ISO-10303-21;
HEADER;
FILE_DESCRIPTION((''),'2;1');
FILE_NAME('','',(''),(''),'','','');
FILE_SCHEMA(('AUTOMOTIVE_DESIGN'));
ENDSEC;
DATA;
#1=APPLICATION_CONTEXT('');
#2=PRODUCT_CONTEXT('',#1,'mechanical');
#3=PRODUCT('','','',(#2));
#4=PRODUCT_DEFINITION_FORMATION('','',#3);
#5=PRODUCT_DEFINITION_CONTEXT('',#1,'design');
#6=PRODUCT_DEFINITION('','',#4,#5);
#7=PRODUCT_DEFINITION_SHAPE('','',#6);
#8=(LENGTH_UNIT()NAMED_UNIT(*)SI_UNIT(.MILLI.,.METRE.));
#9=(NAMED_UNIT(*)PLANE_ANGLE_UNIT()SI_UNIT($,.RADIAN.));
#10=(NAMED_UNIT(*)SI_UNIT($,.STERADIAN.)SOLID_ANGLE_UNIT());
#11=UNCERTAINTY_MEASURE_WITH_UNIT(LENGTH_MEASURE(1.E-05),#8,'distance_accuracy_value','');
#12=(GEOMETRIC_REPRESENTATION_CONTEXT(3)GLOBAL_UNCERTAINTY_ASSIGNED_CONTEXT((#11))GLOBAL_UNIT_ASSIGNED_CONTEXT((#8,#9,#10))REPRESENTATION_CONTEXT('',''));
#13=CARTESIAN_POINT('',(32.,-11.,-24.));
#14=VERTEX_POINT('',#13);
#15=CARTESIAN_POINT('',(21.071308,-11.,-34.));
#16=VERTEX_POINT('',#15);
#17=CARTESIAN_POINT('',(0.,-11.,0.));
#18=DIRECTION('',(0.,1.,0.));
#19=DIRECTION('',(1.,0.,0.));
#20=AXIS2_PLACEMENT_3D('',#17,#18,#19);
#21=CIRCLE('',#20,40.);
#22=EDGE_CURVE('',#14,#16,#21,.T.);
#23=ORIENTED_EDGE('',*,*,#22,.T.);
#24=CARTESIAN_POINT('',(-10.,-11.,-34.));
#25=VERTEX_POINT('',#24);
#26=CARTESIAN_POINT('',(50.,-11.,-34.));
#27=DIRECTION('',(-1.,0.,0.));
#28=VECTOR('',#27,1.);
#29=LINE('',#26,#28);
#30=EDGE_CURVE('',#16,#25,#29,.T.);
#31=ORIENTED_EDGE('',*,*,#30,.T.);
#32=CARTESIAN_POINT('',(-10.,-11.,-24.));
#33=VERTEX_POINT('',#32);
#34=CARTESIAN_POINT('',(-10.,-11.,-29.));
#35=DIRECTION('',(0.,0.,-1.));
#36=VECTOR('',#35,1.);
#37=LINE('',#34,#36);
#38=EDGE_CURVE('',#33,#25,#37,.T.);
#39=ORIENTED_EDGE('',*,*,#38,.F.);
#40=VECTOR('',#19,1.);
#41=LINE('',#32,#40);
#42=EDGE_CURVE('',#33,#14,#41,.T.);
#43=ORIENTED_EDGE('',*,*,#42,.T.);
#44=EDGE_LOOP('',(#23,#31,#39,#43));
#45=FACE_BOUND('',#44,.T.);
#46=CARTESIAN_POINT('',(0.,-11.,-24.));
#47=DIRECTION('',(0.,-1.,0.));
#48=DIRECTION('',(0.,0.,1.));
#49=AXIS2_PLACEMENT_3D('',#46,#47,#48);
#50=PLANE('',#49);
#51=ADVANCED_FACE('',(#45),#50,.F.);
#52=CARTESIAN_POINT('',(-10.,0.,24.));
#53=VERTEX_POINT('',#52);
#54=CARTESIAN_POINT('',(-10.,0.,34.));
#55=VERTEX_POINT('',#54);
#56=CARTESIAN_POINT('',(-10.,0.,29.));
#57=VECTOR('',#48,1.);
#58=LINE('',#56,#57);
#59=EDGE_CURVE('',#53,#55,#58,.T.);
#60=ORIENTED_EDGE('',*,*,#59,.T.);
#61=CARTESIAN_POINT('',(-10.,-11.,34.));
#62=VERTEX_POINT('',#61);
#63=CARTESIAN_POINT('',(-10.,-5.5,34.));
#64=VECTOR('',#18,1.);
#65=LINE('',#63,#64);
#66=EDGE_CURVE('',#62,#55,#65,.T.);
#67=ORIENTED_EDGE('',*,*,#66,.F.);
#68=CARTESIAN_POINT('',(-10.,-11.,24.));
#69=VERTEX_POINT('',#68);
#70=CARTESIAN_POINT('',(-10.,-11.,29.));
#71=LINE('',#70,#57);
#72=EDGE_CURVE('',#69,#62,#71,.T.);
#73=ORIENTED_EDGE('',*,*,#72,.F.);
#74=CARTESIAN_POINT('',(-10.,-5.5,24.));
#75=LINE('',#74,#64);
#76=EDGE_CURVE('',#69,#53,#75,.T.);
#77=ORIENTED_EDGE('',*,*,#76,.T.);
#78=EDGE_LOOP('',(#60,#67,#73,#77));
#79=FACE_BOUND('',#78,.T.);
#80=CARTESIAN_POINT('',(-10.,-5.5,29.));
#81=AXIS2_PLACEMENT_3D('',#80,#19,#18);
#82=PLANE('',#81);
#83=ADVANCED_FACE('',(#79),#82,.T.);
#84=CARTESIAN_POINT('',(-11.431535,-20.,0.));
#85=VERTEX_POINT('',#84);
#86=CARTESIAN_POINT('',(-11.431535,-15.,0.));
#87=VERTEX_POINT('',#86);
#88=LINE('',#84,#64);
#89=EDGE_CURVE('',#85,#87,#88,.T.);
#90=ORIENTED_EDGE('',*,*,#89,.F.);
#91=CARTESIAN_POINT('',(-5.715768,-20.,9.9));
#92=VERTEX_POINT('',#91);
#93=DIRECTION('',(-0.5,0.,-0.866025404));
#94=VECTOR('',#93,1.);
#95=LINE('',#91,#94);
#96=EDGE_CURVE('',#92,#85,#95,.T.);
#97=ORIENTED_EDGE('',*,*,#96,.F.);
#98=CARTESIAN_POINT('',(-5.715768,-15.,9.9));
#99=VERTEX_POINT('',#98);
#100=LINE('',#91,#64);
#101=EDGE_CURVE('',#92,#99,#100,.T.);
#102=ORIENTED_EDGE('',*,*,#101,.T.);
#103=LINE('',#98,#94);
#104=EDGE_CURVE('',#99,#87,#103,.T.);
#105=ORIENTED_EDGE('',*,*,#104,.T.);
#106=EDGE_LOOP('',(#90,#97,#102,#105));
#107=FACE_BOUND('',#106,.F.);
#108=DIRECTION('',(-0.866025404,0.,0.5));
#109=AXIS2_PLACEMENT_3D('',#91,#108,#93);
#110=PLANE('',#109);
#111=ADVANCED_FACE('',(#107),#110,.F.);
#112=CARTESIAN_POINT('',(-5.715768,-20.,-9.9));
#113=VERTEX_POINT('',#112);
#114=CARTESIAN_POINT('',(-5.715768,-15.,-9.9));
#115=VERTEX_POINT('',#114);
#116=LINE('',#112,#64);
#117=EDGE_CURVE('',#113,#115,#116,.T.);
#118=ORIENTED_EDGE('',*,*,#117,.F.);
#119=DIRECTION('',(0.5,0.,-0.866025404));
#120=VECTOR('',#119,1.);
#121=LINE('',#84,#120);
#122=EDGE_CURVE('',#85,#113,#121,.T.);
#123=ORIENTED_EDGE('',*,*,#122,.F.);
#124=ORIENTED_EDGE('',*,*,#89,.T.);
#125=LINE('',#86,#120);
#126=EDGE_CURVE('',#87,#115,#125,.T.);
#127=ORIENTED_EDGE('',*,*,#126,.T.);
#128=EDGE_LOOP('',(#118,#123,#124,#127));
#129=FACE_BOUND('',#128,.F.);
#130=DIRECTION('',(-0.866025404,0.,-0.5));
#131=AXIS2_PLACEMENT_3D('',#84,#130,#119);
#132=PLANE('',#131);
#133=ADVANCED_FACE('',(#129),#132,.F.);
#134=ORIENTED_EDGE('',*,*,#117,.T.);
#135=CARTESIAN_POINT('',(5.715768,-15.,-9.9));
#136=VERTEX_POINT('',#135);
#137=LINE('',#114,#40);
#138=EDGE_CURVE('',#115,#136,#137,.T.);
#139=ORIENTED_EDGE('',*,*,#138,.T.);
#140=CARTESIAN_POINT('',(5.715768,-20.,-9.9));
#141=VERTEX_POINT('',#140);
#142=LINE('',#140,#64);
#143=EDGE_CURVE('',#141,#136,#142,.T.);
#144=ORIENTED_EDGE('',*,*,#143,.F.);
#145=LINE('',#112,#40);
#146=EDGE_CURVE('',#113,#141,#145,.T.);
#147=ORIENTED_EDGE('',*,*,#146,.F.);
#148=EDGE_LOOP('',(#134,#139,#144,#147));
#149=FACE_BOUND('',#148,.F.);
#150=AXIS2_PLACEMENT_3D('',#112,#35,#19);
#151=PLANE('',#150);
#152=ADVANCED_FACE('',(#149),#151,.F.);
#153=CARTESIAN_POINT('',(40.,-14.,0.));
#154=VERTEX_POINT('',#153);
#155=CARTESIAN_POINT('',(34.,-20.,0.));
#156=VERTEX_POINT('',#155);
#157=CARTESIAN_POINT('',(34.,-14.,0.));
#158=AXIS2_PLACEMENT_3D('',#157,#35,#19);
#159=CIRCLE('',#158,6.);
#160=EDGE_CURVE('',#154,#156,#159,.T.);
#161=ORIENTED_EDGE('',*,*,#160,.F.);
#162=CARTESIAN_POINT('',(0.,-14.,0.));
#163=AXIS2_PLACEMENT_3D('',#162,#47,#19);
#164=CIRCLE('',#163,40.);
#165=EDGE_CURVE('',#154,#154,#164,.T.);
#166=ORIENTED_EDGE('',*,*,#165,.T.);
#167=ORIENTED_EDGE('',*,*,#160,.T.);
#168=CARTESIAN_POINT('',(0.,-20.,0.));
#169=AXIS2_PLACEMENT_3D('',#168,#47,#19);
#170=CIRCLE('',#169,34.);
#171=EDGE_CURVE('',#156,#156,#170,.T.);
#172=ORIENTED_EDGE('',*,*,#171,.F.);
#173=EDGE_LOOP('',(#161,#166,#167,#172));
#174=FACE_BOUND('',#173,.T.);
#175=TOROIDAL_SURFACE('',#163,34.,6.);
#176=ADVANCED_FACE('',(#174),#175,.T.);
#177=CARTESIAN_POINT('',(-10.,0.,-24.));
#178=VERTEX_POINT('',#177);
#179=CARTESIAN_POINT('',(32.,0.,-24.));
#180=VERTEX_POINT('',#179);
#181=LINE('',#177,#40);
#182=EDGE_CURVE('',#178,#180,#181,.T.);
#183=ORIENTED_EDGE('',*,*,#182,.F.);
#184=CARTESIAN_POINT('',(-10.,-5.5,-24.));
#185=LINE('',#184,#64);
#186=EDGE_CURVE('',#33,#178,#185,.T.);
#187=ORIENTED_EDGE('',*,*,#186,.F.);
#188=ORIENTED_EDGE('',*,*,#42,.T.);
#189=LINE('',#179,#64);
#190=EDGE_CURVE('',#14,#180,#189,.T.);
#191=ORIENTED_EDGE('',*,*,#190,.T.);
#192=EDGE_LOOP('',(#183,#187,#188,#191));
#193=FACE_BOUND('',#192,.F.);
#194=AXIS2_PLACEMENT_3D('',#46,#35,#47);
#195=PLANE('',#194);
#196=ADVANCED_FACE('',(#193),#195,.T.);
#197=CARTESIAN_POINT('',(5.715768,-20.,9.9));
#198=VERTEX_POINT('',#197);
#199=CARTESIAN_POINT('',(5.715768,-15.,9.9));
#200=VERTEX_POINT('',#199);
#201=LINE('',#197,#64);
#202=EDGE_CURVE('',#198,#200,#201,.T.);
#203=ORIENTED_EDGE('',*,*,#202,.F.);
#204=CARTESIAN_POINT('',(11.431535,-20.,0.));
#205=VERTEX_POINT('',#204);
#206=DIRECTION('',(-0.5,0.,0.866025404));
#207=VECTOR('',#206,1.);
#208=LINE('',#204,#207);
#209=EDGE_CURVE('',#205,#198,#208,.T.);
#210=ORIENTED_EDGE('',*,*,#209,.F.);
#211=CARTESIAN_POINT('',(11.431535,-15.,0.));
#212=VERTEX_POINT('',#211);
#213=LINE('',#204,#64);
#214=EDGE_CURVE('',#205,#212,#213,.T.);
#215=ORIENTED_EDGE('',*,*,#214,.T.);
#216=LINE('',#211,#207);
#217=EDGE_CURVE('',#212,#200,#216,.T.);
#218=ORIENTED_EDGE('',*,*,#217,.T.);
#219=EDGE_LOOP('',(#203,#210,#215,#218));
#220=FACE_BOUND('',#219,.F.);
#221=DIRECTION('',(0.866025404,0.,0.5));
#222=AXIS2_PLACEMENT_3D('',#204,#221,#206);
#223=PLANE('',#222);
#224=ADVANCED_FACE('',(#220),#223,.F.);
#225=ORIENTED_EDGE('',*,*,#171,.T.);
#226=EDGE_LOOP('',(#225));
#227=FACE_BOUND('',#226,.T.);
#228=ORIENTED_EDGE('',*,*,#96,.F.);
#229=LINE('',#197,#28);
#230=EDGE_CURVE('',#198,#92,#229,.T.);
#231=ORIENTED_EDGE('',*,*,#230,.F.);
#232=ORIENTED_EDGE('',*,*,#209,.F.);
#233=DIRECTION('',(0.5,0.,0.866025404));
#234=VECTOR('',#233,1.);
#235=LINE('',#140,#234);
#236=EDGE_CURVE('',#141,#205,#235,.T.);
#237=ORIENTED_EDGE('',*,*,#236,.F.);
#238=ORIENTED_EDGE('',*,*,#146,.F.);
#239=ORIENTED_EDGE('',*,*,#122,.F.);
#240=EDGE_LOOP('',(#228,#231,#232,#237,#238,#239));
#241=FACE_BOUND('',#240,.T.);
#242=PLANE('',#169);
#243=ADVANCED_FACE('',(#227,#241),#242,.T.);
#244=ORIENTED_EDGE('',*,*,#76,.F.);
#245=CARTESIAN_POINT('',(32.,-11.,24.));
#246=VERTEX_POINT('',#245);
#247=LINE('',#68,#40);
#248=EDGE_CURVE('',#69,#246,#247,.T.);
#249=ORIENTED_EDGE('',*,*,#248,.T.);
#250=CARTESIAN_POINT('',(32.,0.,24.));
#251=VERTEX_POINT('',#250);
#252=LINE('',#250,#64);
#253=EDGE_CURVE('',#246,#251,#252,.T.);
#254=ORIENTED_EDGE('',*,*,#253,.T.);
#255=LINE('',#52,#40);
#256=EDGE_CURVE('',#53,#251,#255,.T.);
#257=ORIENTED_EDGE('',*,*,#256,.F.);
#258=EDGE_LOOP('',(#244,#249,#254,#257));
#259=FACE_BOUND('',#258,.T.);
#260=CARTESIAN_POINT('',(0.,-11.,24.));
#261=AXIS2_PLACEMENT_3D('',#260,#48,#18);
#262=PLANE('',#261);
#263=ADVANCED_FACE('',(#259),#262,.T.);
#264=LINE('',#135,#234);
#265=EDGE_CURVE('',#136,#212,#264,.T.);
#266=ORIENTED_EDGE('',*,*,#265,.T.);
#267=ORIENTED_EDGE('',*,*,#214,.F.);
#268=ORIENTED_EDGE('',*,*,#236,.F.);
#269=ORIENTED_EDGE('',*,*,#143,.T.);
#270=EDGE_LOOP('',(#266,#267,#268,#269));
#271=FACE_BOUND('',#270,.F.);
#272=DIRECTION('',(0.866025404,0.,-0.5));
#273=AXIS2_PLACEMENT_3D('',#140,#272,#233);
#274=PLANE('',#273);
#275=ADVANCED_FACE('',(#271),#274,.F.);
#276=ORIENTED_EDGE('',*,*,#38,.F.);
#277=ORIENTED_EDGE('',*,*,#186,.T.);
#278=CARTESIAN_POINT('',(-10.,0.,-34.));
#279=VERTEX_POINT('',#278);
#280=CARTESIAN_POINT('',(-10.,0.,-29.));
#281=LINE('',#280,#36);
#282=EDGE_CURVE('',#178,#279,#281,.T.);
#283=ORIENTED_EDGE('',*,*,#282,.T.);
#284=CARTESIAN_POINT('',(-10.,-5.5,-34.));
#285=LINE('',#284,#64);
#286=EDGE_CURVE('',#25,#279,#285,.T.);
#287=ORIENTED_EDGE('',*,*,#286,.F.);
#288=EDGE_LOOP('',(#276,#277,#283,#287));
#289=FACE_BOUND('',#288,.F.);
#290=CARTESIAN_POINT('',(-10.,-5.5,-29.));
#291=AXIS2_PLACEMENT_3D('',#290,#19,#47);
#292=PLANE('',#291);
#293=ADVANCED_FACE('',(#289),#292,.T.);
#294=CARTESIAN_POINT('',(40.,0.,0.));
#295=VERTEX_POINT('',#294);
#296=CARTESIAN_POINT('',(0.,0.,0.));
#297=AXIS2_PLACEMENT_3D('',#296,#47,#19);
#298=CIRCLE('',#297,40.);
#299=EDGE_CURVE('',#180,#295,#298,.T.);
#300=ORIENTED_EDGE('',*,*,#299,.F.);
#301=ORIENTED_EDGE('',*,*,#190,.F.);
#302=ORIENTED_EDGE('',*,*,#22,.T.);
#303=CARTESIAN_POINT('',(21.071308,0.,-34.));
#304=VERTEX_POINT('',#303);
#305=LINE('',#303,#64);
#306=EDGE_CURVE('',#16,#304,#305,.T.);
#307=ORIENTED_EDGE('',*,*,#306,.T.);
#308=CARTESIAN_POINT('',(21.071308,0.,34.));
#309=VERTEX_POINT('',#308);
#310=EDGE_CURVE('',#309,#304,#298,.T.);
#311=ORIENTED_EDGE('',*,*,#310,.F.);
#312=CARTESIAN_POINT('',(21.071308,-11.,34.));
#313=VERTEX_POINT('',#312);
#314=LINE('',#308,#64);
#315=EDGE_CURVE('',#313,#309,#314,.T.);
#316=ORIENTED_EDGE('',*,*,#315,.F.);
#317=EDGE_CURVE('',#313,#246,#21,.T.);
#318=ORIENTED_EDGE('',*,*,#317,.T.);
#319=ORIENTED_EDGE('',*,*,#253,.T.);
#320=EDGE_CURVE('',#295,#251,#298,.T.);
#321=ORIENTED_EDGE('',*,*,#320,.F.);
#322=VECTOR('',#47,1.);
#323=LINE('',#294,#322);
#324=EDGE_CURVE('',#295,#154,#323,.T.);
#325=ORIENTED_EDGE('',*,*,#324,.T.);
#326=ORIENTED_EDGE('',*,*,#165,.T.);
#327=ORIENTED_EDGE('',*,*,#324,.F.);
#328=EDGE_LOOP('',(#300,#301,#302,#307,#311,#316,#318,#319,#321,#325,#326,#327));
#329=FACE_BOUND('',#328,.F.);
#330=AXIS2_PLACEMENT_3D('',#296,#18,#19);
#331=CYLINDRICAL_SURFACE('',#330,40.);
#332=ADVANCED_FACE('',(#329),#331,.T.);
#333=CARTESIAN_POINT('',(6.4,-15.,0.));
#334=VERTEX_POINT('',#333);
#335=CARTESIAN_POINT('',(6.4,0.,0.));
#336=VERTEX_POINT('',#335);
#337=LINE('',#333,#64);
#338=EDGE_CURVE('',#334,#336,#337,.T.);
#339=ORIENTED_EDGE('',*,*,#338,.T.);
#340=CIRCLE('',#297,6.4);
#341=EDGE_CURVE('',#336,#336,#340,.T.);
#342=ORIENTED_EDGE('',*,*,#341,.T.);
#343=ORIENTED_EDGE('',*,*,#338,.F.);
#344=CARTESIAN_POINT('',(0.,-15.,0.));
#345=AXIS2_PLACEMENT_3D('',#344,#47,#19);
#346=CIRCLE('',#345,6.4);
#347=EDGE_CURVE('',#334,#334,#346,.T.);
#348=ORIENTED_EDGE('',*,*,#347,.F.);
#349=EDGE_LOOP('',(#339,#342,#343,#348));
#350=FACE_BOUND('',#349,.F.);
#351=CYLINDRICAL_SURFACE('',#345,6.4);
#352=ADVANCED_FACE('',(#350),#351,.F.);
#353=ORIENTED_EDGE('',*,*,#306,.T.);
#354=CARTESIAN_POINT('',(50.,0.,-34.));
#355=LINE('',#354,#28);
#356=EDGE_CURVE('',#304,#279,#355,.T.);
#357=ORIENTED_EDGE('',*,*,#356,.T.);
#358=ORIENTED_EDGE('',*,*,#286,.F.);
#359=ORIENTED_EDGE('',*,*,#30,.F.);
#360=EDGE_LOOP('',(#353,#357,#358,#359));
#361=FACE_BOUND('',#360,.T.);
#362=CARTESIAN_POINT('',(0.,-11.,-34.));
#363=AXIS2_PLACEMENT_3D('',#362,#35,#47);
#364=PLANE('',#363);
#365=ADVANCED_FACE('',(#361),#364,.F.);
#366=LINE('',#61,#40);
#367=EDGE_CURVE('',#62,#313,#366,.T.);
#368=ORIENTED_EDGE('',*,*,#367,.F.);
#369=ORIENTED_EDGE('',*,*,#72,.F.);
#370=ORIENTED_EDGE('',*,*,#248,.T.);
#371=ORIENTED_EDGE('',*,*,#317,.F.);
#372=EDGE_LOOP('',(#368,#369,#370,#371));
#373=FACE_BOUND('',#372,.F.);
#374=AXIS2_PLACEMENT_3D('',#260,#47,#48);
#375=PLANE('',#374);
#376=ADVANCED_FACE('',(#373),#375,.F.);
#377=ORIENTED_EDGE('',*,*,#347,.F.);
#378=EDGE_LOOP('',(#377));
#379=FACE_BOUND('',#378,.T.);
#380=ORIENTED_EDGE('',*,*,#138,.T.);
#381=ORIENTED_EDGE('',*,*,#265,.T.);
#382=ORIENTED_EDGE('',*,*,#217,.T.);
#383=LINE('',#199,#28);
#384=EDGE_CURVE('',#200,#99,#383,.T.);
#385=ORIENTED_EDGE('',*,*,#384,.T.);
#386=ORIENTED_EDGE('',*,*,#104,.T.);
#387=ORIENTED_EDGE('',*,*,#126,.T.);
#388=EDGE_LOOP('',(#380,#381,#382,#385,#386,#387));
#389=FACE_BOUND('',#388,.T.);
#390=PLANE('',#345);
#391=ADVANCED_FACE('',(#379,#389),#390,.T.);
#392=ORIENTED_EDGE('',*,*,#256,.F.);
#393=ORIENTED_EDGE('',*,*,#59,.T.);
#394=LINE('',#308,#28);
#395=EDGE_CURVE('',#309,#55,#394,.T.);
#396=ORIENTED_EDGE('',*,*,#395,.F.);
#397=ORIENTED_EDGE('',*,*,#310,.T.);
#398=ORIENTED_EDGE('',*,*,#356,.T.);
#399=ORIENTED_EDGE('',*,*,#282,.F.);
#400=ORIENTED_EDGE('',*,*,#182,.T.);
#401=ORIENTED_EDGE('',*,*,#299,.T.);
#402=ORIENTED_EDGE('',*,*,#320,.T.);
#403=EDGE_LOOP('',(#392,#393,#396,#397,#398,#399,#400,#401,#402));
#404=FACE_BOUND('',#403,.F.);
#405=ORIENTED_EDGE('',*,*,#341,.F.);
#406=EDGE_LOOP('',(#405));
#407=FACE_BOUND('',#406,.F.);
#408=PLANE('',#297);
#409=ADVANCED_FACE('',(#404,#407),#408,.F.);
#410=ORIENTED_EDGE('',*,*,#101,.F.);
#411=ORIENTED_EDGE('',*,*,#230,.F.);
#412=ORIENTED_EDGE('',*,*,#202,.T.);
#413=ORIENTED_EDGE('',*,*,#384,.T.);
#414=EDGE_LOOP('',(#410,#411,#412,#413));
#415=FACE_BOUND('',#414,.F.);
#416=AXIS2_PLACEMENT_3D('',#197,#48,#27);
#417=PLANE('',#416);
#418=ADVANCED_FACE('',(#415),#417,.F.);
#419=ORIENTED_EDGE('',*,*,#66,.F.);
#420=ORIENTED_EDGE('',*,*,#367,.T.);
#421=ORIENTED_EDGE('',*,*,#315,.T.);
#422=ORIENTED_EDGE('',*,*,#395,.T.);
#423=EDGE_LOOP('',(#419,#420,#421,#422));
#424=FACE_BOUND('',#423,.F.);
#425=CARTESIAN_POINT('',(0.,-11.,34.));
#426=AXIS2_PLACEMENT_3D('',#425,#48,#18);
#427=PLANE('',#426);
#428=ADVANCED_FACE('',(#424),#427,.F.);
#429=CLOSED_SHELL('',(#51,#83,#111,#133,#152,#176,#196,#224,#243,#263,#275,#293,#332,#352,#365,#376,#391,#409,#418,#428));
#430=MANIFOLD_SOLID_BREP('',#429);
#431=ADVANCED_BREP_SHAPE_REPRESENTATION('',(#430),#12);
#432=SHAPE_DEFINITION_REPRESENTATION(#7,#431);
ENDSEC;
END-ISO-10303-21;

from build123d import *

# Parameters (mm, degrees)
F0_R          = 40
F1_DEPTH      = 20
F2_W          = 11
F2_H          = 10
F3_DEPTH      = 50
F3_DEPTH_BACK = 10
F4_R          = 6
F6_DEPTH      = 5
F7_R          = 6.4
F8_DEPTH      = 25


# Not quite as in the source:
# - a pattern or mirror of a feature is missing from the dataset's text; its kind, count and spacing are read off the source's solid


with BuildPart() as f1:
    # F0 (on Front) → F1 (new body)
    with BuildSketch(Plane.XZ):
        Circle(F0_R)
    extrude(amount=F1_DEPTH)

    # F2 (on Right) → F3 (cut, two sides)
    with BuildSketch(Plane.YZ) as f3_sk:
        with Locations((-5.5, 29)):
            Rectangle(F2_W, F2_H)
    f3 = extrude(amount=F3_DEPTH, mode=Mode.SUBTRACT) + extrude(f3_sk.sketch, amount=-F3_DEPTH_BACK, mode=Mode.SUBTRACT)

    # F3_copies: F3 across plane
    add(f3.mirror(Plane(origin=(0, 0, 0), x_dir=(-1, 0, 0), z_dir=(0, 0, -1))), mode=Mode.SUBTRACT)

    # F4
    f4_edges = [f1.edges().sort_by_distance(p)[0] for p in [
        (-40, -20, 0),
    ]]
    fillet(f4_edges, radius=F4_R)

    # F5 (on face) → F6 (cut)
    with BuildSketch(Plane.XZ.offset(20)):
        Polygon((-5.715767665, -9.9), (5.715767665, -9.9), (11.43153533, 0), (5.715767665, 9.9), (-5.715767665, 9.9), (-11.43153533, 0), align=None)
    extrude(amount=-F6_DEPTH, mode=Mode.SUBTRACT)

    # F7 (on face) → F8 (cut)
    with BuildSketch(Plane.XZ.offset(15)):
        Circle(F7_R)
    extrude(amount=-F8_DEPTH, mode=Mode.SUBTRACT)


solid = f1.part
